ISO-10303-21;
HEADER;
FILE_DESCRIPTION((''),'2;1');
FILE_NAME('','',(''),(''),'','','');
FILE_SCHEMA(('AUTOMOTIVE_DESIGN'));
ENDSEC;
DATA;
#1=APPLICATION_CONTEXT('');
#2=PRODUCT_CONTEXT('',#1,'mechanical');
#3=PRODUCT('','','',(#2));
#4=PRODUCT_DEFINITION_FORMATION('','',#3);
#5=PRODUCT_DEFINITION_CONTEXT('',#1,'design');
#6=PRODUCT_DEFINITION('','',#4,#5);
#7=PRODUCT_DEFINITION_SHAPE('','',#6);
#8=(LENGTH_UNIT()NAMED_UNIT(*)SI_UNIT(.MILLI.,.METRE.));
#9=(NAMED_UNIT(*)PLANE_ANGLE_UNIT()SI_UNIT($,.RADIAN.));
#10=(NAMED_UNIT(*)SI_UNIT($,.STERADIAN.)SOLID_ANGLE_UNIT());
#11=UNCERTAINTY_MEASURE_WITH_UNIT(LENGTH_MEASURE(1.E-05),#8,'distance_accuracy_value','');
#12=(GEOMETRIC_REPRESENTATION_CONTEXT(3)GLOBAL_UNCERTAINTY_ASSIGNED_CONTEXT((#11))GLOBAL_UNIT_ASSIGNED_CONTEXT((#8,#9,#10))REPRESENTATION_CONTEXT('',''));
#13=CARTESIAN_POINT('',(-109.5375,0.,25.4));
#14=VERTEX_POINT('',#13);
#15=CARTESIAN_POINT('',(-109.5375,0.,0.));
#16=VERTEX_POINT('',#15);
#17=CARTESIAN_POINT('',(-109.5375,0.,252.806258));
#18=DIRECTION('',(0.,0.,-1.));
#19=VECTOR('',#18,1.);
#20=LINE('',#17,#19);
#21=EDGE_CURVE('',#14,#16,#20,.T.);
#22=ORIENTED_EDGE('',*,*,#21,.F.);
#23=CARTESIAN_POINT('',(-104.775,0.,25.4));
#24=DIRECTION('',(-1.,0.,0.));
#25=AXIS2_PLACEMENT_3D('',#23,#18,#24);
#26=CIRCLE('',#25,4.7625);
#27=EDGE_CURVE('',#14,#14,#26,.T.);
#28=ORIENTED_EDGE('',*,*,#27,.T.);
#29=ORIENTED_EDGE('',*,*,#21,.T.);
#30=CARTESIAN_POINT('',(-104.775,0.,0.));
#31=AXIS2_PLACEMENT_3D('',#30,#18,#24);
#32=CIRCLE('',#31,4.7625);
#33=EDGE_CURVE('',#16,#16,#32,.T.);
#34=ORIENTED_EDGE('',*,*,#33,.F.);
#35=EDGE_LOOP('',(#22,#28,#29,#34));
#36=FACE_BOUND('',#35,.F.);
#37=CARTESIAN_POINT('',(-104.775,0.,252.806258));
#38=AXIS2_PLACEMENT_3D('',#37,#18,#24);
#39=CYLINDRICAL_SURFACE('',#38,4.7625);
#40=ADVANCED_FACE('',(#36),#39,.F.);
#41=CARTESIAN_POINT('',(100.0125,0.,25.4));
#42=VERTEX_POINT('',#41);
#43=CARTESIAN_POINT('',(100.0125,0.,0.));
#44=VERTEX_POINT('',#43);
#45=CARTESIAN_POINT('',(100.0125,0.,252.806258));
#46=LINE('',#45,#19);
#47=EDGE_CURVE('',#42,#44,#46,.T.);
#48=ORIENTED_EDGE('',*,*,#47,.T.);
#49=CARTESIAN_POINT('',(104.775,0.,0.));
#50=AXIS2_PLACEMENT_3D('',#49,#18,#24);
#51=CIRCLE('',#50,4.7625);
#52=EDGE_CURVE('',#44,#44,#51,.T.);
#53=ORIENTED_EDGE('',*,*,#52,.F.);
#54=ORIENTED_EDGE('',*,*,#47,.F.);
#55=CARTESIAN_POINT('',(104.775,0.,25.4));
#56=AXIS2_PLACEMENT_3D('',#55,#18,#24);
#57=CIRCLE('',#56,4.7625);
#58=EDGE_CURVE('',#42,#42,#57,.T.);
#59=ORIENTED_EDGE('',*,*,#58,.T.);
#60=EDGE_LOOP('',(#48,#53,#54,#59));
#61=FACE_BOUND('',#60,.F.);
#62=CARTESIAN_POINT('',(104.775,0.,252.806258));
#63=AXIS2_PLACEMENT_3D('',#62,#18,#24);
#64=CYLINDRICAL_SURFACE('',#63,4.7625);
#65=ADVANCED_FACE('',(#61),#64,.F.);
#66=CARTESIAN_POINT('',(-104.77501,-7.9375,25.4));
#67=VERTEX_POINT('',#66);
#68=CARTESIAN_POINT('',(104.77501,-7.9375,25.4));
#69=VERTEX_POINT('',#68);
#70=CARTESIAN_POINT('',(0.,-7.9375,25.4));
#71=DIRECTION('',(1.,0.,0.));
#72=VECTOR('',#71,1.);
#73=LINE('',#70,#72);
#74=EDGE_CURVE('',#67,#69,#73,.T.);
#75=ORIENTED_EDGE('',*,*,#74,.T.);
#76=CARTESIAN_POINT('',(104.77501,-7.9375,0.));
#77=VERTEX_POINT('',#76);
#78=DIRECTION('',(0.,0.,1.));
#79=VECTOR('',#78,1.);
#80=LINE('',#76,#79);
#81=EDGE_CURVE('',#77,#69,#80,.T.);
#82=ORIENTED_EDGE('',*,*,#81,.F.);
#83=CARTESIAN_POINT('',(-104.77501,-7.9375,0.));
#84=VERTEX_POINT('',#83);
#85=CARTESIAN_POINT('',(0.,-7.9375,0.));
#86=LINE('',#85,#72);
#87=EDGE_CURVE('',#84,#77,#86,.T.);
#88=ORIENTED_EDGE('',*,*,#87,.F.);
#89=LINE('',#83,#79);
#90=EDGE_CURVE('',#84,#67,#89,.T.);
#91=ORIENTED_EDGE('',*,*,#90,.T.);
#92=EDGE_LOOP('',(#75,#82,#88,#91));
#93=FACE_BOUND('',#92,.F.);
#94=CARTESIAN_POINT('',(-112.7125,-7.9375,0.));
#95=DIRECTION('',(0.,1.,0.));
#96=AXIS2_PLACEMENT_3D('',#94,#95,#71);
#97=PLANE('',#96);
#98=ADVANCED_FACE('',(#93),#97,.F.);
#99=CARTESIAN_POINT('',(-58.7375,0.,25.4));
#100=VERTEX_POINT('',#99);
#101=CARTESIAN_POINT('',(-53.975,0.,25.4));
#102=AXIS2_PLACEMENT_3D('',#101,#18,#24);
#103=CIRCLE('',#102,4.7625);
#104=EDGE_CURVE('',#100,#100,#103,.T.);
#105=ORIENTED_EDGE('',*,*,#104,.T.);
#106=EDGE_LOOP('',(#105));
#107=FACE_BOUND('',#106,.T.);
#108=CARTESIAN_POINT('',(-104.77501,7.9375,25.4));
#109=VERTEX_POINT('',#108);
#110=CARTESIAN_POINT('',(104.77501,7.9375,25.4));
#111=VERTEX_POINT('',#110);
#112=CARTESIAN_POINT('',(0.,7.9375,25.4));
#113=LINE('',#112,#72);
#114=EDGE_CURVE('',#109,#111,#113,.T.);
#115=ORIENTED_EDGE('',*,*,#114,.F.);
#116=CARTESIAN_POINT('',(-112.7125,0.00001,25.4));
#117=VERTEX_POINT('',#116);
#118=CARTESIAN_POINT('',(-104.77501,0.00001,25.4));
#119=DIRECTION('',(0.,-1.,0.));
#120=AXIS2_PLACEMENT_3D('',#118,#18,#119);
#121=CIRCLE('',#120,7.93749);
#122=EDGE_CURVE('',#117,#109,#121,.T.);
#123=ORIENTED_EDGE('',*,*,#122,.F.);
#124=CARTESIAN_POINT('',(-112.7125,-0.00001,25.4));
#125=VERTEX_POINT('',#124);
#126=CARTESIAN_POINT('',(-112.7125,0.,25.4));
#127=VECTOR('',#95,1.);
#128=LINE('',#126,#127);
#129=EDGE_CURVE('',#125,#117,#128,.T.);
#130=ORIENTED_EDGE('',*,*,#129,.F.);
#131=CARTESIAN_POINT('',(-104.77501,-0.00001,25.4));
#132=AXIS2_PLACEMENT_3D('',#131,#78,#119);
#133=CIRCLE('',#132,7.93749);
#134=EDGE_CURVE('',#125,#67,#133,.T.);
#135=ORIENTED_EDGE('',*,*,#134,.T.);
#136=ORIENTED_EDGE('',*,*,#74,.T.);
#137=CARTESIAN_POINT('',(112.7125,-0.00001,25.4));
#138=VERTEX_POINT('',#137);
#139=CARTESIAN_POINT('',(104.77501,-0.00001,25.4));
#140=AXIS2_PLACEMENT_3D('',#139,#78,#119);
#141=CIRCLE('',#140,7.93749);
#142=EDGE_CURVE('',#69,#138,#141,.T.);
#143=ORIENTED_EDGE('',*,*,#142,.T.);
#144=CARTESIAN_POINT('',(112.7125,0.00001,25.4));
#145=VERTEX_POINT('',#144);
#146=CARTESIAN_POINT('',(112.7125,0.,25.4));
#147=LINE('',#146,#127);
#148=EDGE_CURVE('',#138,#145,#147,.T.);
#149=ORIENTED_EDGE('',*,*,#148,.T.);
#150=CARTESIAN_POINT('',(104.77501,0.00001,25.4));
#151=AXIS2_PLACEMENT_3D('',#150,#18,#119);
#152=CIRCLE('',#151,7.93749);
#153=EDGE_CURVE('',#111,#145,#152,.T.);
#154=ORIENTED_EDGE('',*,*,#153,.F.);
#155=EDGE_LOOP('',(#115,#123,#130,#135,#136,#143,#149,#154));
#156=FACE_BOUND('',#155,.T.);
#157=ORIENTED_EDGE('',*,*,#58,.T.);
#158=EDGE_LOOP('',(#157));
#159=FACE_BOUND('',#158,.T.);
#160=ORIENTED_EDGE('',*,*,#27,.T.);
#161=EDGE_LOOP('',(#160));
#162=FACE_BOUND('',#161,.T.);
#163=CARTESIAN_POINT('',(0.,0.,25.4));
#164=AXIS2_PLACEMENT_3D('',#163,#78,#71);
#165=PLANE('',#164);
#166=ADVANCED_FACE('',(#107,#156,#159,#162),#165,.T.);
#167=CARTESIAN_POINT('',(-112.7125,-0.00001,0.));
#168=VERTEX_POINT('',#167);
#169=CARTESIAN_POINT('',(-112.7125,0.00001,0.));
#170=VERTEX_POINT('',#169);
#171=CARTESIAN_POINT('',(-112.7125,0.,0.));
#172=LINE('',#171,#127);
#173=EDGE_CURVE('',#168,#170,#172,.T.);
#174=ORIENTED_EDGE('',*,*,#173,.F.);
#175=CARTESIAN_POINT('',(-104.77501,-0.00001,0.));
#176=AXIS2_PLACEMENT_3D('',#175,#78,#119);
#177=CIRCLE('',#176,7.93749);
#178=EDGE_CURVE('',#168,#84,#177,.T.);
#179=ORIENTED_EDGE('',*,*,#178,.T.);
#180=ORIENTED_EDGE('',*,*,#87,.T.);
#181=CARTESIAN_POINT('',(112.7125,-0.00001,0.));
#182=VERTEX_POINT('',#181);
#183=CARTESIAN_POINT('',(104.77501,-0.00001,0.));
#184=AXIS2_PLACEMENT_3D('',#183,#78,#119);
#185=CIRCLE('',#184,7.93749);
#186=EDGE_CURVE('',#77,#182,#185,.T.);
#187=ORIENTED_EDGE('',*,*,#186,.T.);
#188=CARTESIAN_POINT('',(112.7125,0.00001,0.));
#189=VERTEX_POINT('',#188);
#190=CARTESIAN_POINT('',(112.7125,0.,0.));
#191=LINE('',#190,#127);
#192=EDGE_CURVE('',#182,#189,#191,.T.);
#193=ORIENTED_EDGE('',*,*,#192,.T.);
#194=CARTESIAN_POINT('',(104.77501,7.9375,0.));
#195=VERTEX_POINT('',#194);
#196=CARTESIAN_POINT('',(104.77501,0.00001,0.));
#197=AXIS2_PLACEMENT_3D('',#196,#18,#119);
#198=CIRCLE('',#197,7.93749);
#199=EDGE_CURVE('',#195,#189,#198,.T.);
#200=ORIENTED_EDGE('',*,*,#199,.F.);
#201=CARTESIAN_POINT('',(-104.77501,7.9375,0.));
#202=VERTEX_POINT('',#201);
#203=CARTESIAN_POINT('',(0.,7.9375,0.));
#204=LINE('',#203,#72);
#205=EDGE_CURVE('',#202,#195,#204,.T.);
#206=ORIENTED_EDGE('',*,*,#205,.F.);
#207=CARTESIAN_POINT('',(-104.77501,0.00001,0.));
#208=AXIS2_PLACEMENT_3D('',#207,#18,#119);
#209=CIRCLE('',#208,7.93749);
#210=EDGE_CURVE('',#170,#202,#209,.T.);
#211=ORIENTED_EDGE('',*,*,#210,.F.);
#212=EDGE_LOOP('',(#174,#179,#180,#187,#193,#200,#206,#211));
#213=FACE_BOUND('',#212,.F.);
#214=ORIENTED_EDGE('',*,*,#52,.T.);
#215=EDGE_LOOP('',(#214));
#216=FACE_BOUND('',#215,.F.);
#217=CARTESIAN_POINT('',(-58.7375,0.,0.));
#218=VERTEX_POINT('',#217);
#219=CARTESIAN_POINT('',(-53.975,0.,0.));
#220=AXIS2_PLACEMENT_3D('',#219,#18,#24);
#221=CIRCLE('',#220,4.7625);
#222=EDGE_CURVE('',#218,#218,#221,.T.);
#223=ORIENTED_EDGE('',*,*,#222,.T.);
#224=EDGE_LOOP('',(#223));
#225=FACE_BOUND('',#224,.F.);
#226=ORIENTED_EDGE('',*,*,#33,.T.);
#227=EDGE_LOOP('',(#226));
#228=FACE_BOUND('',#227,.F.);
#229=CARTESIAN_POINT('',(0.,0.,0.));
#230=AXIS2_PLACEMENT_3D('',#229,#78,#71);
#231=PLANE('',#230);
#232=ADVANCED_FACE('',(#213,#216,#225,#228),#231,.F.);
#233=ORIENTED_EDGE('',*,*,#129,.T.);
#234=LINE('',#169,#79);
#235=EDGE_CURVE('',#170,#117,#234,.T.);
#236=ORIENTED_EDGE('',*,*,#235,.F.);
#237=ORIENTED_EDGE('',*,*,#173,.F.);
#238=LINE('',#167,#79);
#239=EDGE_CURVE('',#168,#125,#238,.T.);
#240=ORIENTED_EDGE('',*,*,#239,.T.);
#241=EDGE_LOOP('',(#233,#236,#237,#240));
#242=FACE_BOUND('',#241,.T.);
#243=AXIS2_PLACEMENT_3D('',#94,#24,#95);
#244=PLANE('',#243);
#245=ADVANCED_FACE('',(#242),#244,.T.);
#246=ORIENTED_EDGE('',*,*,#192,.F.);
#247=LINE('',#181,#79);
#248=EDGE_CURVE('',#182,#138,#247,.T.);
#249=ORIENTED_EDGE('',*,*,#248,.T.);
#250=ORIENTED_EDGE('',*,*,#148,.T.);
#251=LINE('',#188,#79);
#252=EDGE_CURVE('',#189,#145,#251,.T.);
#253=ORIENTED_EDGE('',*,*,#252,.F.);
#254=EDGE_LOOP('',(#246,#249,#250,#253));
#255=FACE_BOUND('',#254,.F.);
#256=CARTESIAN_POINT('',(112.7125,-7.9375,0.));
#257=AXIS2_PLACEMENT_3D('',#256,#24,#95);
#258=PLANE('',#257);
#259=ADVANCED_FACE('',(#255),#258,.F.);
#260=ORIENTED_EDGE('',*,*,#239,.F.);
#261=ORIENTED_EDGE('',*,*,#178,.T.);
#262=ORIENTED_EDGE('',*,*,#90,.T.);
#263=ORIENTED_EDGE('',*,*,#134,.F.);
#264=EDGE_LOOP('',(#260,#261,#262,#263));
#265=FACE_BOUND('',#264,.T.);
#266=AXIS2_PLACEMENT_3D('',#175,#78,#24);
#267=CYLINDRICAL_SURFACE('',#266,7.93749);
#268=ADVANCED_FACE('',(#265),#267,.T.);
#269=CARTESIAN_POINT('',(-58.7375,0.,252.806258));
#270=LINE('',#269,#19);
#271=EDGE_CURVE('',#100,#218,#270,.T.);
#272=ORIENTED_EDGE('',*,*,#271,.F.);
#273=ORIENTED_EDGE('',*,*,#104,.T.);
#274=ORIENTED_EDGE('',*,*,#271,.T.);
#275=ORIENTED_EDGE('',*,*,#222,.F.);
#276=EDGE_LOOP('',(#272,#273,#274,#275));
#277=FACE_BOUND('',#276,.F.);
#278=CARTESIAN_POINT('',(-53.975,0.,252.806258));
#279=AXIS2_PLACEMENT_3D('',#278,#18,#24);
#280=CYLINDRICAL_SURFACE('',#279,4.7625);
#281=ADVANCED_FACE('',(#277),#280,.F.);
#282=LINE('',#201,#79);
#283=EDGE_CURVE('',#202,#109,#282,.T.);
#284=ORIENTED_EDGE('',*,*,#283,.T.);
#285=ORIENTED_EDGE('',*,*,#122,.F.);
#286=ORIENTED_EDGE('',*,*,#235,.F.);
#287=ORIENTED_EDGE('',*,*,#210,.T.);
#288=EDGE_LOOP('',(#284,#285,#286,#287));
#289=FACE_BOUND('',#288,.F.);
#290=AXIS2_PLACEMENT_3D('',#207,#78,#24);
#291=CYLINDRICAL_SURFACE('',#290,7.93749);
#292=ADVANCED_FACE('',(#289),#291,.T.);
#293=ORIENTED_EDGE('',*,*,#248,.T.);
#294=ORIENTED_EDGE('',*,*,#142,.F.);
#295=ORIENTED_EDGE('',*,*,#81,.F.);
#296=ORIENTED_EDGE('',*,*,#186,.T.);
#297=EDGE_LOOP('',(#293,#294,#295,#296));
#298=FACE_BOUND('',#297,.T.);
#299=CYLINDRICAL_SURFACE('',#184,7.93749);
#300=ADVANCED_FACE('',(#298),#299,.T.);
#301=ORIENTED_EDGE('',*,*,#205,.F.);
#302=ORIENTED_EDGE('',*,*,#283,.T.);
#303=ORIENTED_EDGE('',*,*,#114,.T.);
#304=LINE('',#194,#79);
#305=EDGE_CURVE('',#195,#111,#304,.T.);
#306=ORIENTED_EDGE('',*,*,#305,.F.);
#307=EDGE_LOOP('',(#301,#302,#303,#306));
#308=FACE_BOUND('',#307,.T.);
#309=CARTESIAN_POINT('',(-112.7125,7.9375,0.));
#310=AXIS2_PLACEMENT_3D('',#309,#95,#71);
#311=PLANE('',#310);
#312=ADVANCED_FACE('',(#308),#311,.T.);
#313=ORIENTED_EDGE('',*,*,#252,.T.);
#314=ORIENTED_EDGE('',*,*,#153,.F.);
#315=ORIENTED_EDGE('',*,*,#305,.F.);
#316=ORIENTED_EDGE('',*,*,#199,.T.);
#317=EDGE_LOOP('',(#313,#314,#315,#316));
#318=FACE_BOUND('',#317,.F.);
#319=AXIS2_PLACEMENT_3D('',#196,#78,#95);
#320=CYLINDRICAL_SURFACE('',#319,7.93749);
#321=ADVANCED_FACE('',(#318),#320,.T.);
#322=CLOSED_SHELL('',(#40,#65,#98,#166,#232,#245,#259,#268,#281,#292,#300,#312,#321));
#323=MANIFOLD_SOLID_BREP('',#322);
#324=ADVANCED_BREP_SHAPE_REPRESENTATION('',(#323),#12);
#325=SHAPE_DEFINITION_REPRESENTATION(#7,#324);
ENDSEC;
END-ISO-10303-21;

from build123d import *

# Parameters (mm, degrees)
F0_W     = 225.425
F0_H     = 15.875
F1_DEPTH = 25.4
F3_D     = 9.525
F4_R     = 7.93749


# Not quite as in the source:
# - a fillet or chamfer is up to 0.001 mm smaller than in the source, because OpenCascade refuses the exact size


with BuildPart() as f1:
    # F0 (on Top) → F1 (new body)
    with BuildSketch(Plane.XY):
        Rectangle(F0_W, F0_H)
    extrude(amount=F1_DEPTH)

    # F3 (through all)
    with Locations(Plane.XY.offset(25.4)):
        with Locations((104.775, 0), (-104.775, 0), (-53.975, 0)):
            Hole(F3_D / 2)

    # F4 (radius 7.9375 in the source; OpenCascade refuses exactly that, so slightly less here)
    f4_edges = [f1.edges().sort_by_distance(p)[0] for p in [
        (-112.7125, -7.9375, 12.7),
        (112.7125, -7.9375, 12.7),
        (112.7125, 7.9375, 12.7),
        (-112.7125, 7.9375, 12.7),
    ]]
    fillet(f4_edges, radius=F4_R)


solid = f1.part
